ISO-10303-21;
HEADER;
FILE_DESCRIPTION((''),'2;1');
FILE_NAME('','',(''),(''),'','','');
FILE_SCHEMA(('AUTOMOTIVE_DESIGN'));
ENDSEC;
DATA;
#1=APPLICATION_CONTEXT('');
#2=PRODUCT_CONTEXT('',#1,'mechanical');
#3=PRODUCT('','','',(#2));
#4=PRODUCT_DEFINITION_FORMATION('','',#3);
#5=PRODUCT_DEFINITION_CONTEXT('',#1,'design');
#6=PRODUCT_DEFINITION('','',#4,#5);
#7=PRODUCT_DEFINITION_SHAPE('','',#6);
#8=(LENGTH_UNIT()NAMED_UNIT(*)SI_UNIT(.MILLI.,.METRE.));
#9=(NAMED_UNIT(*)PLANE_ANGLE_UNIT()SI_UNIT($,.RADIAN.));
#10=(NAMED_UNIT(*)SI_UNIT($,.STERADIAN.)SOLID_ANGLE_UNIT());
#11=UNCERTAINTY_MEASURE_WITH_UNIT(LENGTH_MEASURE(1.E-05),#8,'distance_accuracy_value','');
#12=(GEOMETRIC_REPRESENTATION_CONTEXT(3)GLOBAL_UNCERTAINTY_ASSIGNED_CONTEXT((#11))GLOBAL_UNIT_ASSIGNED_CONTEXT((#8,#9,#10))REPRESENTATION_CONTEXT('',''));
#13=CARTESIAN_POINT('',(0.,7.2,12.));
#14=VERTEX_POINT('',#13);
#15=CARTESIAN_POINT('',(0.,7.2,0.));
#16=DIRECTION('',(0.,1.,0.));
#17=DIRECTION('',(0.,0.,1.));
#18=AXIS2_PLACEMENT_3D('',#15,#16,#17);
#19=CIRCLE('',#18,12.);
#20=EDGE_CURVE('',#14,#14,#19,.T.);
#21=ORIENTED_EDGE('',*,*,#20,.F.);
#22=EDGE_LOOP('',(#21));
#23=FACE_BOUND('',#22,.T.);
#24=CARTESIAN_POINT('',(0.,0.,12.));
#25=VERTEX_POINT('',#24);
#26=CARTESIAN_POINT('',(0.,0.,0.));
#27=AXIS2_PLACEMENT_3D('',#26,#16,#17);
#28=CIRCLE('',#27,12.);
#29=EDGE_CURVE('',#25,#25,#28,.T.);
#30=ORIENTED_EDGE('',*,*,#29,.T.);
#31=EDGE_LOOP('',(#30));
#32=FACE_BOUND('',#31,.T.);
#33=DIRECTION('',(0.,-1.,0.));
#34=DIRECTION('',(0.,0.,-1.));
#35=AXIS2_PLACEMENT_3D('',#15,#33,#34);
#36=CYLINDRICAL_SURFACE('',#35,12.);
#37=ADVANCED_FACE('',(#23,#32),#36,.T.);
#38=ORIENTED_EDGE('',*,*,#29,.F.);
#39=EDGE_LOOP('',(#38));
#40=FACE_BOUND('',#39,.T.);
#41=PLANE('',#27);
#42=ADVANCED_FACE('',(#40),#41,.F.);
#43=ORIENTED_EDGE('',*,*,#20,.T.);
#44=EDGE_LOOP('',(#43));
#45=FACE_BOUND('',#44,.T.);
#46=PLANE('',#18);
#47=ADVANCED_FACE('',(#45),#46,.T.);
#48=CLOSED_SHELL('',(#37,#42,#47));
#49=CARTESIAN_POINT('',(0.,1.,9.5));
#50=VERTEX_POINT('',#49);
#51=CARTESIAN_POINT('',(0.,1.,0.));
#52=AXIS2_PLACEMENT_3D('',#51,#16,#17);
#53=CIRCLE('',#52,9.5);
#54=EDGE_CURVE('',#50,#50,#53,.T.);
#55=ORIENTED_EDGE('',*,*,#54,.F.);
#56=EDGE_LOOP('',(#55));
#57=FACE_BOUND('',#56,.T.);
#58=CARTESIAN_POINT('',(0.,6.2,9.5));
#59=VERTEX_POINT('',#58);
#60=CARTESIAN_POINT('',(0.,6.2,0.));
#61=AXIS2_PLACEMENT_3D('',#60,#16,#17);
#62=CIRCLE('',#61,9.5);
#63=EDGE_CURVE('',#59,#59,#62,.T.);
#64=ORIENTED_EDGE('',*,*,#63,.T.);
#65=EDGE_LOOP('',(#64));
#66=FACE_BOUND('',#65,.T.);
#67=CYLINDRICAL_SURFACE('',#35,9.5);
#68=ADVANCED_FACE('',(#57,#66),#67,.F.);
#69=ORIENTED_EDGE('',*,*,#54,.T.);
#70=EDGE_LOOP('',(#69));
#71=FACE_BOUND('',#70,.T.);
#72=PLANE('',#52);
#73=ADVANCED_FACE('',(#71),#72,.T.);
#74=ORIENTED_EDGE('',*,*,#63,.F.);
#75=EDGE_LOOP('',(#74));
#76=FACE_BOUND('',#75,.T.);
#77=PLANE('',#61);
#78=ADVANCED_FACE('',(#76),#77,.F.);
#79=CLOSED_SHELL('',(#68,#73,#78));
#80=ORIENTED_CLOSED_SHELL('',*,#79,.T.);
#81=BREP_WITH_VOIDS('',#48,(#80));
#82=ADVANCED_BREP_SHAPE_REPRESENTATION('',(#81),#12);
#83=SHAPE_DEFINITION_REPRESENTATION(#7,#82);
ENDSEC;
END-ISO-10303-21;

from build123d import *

# Parameters (mm, degrees)
SKETCH1_R           = 12
BOSS_EXTRUDE1_DEPTH = 7.2
SHELL1_START        = 1
SHELL1_OUTLINE_R    = 9.5
SHELL1_DEPTH        = 5.2


# Read off the part's stored shape, not the designer's step: Shell1
with BuildPart() as part:
    # Sketch1 → Boss-Extrude1 (new body)
    with BuildSketch(Plane(origin=(0, 0, 0), x_dir=(1, 0, 0), z_dir=(0, 1, 0))):
        with Locations(Location((0, 0, 0), (0, 0, 270))):
            Circle(SKETCH1_R)
    extrude(amount=BOSS_EXTRUDE1_DEPTH)

    # Shell1 outline → Shell1 (cut)
    with BuildSketch(Plane(origin=(0, 0, 0), x_dir=(1, 0, 0), z_dir=(0, 1, 0)).offset(SHELL1_START)):
        Circle(SHELL1_OUTLINE_R)
    extrude(amount=SHELL1_DEPTH, mode=Mode.SUBTRACT)


solid = part.part
